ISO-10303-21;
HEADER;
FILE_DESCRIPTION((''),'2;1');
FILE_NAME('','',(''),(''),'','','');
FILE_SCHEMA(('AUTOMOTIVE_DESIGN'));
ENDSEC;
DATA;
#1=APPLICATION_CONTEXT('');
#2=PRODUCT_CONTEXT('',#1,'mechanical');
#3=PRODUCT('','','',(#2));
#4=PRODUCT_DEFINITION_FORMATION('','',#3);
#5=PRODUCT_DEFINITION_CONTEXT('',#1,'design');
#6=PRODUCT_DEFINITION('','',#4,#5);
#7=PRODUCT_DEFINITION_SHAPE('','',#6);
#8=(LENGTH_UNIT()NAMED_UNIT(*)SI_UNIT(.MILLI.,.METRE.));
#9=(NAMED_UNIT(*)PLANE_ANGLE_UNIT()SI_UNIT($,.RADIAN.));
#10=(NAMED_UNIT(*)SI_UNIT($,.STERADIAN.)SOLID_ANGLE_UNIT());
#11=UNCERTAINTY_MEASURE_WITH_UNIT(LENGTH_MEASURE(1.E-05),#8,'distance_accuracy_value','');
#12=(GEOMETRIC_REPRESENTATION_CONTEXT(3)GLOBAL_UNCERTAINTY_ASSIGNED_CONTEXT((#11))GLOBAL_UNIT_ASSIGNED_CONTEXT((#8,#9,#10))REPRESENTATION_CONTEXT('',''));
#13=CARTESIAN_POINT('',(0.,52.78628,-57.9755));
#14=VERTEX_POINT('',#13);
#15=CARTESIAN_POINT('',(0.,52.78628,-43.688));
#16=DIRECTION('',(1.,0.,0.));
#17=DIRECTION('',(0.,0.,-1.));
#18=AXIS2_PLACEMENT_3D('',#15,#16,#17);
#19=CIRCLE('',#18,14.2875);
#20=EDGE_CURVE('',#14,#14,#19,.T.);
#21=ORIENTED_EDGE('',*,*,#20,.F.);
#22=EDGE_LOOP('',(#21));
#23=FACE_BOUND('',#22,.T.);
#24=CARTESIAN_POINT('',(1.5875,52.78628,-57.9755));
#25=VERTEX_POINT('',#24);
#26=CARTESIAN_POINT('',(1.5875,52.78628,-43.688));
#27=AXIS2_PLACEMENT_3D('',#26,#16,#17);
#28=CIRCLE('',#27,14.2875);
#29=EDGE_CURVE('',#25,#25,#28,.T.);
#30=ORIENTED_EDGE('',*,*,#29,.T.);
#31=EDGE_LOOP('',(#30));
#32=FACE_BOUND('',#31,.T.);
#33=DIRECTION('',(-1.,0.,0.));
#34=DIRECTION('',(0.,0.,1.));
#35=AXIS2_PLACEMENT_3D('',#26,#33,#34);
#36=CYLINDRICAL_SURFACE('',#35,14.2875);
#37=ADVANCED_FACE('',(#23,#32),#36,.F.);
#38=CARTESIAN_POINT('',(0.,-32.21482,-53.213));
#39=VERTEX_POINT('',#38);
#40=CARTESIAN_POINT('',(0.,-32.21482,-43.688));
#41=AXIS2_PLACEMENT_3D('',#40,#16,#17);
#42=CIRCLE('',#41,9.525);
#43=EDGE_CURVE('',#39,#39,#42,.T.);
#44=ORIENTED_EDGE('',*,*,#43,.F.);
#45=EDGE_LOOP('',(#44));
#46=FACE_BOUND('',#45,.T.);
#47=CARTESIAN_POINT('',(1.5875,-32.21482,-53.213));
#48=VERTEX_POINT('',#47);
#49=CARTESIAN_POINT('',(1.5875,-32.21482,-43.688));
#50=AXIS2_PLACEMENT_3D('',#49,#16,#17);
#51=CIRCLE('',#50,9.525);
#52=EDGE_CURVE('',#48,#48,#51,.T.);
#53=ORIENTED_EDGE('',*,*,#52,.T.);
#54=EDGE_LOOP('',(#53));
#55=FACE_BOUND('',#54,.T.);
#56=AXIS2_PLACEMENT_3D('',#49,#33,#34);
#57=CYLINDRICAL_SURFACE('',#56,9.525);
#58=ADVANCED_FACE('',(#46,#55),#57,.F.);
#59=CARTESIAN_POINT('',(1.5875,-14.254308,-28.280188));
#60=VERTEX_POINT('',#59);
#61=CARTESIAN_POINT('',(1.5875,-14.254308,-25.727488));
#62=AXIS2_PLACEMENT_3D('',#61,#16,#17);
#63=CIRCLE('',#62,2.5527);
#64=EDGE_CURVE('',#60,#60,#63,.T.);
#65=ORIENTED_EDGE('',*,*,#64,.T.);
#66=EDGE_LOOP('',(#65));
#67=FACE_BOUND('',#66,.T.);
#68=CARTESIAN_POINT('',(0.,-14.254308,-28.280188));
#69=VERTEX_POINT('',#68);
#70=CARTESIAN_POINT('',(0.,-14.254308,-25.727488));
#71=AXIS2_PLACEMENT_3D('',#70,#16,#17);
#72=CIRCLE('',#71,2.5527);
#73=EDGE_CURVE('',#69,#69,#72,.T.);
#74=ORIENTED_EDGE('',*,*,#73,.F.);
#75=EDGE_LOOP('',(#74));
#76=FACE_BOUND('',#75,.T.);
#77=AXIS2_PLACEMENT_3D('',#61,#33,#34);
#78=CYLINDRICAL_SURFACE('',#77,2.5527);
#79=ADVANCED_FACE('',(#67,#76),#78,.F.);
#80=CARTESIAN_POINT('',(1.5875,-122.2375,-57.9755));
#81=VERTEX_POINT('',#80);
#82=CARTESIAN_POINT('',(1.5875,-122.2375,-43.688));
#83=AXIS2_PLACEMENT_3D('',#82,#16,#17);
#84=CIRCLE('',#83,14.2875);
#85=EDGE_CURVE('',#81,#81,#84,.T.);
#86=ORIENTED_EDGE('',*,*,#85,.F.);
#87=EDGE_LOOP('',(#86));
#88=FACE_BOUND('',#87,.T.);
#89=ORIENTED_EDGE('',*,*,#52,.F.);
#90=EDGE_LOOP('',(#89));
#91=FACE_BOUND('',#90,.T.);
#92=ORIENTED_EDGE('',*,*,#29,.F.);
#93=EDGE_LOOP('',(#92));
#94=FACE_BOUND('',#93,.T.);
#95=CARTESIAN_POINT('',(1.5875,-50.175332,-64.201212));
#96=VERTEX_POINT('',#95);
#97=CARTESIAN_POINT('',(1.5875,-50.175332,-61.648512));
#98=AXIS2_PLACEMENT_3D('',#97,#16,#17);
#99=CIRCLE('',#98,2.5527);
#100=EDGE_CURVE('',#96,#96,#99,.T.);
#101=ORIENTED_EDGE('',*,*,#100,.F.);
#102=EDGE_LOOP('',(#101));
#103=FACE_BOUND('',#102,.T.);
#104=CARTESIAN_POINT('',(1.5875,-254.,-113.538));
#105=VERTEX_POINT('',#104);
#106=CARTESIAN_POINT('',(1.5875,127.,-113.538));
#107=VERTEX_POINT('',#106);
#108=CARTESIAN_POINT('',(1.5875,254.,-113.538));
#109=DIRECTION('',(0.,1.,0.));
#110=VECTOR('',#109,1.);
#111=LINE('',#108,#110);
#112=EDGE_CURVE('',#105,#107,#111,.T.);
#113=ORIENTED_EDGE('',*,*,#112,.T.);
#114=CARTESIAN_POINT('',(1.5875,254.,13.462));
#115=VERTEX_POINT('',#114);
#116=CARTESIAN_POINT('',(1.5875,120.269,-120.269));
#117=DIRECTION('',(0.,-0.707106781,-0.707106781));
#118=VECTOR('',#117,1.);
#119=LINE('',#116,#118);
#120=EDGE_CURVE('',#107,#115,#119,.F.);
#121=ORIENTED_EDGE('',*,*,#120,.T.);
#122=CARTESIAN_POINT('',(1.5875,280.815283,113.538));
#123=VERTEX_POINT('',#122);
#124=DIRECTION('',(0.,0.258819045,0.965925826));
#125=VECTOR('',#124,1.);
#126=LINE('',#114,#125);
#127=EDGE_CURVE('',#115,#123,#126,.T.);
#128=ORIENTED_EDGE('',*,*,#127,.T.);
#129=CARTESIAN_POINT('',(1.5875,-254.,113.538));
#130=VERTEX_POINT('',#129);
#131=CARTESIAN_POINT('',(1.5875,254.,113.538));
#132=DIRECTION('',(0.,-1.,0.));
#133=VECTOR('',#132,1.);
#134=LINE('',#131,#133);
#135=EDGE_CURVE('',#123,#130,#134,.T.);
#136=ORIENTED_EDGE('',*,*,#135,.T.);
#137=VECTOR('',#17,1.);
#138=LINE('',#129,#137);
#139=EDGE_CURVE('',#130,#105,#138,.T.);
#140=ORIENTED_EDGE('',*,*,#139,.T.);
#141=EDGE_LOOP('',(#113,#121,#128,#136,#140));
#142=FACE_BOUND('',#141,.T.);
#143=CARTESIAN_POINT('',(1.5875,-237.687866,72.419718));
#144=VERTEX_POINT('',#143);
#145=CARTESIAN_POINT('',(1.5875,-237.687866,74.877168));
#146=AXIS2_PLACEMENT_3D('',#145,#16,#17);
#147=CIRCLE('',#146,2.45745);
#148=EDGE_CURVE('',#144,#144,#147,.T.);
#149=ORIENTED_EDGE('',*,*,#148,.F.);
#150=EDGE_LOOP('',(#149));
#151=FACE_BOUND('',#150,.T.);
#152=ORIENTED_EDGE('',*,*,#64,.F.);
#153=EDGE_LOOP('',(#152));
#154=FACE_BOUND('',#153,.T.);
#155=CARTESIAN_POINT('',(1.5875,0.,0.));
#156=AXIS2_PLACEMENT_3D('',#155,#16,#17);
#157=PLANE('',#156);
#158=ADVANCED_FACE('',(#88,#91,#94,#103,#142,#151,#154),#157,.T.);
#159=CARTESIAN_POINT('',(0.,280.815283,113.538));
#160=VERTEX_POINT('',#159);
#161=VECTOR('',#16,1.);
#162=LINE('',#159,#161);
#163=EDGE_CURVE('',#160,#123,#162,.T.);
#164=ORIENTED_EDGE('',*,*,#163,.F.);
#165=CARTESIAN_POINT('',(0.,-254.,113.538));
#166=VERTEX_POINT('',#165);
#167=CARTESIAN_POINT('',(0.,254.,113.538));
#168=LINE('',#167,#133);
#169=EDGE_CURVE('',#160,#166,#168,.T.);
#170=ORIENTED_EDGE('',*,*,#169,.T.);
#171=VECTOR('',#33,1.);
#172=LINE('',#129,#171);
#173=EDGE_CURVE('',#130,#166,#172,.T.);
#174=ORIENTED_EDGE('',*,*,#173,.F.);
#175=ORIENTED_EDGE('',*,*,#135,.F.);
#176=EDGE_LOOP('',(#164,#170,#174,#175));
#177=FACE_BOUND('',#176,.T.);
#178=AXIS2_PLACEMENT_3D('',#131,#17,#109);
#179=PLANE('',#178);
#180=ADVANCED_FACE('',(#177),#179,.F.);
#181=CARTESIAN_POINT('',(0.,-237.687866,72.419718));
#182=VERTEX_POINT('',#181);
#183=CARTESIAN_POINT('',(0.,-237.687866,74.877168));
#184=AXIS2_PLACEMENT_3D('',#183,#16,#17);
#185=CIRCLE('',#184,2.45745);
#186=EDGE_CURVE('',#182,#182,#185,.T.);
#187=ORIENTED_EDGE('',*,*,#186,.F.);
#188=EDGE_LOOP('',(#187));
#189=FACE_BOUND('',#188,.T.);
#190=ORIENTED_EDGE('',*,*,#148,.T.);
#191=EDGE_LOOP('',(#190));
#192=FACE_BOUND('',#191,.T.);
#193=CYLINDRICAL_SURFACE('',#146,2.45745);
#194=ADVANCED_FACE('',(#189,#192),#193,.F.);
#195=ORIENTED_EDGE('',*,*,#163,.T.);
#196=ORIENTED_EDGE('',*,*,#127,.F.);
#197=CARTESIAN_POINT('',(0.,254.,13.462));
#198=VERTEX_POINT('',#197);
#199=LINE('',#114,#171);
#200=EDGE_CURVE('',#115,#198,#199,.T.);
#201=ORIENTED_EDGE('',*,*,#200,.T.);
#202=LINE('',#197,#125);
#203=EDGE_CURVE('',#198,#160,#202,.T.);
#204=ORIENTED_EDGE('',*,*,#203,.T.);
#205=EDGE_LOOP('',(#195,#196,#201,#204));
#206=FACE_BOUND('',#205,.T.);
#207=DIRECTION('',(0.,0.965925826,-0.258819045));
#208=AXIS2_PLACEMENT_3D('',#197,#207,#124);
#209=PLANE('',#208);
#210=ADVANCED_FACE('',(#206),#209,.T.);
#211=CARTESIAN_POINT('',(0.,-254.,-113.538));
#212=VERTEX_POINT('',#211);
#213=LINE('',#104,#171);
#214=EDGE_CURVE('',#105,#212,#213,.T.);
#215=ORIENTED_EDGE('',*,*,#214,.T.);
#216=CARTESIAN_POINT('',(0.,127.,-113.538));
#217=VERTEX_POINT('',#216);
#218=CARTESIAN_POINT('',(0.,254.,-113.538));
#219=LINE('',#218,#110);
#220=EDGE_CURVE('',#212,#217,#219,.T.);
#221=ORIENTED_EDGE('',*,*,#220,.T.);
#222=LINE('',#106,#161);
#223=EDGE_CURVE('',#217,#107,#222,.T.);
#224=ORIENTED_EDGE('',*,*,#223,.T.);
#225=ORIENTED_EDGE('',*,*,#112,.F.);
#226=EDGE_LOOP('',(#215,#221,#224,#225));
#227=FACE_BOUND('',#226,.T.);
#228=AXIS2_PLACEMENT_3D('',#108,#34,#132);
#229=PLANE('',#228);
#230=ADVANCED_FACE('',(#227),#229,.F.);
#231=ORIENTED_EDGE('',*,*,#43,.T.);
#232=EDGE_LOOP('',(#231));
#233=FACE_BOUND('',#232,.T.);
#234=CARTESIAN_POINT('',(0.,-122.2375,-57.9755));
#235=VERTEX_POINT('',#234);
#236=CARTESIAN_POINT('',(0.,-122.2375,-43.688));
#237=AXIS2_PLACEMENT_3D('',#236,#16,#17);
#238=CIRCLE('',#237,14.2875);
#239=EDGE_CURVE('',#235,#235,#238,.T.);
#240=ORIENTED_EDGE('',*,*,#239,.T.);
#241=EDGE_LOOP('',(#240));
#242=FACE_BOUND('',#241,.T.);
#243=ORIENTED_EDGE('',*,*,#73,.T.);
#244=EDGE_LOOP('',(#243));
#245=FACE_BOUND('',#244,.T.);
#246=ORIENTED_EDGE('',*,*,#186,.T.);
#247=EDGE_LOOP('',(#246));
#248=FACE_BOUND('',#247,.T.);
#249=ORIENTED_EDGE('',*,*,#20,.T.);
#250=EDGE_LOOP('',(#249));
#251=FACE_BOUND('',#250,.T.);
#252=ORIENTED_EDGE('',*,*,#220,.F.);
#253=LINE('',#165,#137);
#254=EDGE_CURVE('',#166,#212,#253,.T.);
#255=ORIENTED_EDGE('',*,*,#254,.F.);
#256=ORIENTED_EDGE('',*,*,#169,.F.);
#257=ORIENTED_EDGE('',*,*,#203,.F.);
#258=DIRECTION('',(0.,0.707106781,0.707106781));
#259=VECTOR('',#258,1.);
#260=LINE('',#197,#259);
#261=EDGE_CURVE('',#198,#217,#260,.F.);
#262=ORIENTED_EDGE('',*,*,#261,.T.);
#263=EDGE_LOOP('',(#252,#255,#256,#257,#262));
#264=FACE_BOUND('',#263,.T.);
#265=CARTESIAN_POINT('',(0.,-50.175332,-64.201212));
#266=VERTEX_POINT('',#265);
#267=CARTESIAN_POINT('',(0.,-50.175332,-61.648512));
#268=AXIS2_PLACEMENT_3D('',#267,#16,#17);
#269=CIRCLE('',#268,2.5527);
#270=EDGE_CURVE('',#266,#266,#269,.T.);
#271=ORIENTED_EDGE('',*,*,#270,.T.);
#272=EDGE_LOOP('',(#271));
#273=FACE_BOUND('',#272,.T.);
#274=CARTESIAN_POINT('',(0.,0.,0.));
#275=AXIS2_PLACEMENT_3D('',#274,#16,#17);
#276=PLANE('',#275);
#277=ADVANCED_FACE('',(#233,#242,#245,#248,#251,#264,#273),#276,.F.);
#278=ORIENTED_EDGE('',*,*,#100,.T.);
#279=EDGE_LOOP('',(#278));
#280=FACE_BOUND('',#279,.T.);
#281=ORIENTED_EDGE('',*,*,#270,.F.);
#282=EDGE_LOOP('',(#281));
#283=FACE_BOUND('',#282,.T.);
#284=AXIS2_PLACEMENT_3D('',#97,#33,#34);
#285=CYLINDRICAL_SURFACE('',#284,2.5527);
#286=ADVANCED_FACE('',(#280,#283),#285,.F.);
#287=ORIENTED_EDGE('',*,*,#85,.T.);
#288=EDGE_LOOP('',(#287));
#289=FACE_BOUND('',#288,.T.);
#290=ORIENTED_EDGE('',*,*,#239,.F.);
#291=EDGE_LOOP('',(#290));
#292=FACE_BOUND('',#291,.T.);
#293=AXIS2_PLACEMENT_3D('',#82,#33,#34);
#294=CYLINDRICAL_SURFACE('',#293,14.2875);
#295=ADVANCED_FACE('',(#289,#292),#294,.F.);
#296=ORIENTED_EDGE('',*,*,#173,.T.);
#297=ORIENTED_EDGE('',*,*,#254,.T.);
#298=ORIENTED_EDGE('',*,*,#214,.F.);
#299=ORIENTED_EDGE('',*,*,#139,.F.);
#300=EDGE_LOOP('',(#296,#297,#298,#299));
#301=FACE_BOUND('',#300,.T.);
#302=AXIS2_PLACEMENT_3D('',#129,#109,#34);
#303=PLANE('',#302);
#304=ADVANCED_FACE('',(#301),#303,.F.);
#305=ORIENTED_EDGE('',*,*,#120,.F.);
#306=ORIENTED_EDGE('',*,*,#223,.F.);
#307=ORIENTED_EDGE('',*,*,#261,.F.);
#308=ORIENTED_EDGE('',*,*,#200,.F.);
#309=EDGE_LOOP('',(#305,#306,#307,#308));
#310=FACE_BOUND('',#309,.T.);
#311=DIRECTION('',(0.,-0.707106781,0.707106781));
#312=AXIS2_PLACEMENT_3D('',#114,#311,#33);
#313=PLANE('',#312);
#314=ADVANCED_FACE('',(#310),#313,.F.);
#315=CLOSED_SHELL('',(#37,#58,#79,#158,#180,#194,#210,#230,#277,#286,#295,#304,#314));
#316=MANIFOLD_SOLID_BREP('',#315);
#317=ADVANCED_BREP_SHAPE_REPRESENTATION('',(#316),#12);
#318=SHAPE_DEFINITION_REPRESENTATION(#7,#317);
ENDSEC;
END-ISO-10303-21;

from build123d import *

# Parameters (mm, degrees)
BOSS_EXTRUDE1_OUTLINE_W   = 227.076
BOSS_EXTRUDE1_OUTLINE_H   = 508
BOSS_EXTRUDE1_OUTLINE_R   = 14.2875
BOSS_EXTRUDE1_OUTLINE_R_2 = 2.5527
BOSS_EXTRUDE1_OUTLINE_R_3 = 9.525
BOSS_EXTRUDE1_DEPTH       = 1.5875
F_8_CLEARANCE_HOLE1_D     = 4.9149
CHAMFER1_SIZE             = 127
BOSS_EXTRUDE2_DEPTH       = 1.5875


# Read off the part's stored shape, not the designer's step: Boss-Extrude1
with BuildPart() as part:
    # Boss-Extrude1 outline → Boss-Extrude1 (new body)
    with BuildSketch(Plane(origin=(0, 0, 0), x_dir=(0, 0, -1), z_dir=(1, 0, 0))):
        Rectangle(BOSS_EXTRUDE1_OUTLINE_W, BOSS_EXTRUDE1_OUTLINE_H)
        with Locations((43.688, -122.2375)):
            Circle(BOSS_EXTRUDE1_OUTLINE_R, mode=Mode.SUBTRACT)
        with Locations((25.727487758, -14.254307758)):
            Circle(BOSS_EXTRUDE1_OUTLINE_R_2, mode=Mode.SUBTRACT)
        with Locations((43.688, -32.21482)):
            Circle(BOSS_EXTRUDE1_OUTLINE_R_3, mode=Mode.SUBTRACT)
        with Locations((61.648512242, -50.175332242)):
            Circle(BOSS_EXTRUDE1_OUTLINE_R_2, mode=Mode.SUBTRACT)
        with Locations((43.688, 52.78628)):
            Circle(BOSS_EXTRUDE1_OUTLINE_R, mode=Mode.SUBTRACT)
    extrude(amount=BOSS_EXTRUDE1_DEPTH)

    # #8 Clearance Hole1 (through all)
    with Locations(Plane(origin=(1.5875, 0, 0), x_dir=(0, 0, -1), z_dir=(1, 0, 0))):
        with Locations((-74.877168, -237.687866)):
            Hole(F_8_CLEARANCE_HOLE1_D / 2)

    # Chamfer1
    chamfer1_edges = [part.edges().sort_by_distance(p)[0] for p in [
        (0.79375, 254, -113.538),
    ]]
    chamfer(chamfer1_edges, length=CHAMFER1_SIZE)

    # Sketch7 → Boss-Extrude2 (add, through all)
    with BuildSketch(Plane(origin=(1.5875, 0, 0), x_dir=(0, 0, -1), z_dir=(1, 0, 0))):
        Polygon((-113.538, 254), (-113.538, 280.815283382), (-13.462, 254), align=None)
    extrude(amount=-BOSS_EXTRUDE2_DEPTH)


solid = part.part
